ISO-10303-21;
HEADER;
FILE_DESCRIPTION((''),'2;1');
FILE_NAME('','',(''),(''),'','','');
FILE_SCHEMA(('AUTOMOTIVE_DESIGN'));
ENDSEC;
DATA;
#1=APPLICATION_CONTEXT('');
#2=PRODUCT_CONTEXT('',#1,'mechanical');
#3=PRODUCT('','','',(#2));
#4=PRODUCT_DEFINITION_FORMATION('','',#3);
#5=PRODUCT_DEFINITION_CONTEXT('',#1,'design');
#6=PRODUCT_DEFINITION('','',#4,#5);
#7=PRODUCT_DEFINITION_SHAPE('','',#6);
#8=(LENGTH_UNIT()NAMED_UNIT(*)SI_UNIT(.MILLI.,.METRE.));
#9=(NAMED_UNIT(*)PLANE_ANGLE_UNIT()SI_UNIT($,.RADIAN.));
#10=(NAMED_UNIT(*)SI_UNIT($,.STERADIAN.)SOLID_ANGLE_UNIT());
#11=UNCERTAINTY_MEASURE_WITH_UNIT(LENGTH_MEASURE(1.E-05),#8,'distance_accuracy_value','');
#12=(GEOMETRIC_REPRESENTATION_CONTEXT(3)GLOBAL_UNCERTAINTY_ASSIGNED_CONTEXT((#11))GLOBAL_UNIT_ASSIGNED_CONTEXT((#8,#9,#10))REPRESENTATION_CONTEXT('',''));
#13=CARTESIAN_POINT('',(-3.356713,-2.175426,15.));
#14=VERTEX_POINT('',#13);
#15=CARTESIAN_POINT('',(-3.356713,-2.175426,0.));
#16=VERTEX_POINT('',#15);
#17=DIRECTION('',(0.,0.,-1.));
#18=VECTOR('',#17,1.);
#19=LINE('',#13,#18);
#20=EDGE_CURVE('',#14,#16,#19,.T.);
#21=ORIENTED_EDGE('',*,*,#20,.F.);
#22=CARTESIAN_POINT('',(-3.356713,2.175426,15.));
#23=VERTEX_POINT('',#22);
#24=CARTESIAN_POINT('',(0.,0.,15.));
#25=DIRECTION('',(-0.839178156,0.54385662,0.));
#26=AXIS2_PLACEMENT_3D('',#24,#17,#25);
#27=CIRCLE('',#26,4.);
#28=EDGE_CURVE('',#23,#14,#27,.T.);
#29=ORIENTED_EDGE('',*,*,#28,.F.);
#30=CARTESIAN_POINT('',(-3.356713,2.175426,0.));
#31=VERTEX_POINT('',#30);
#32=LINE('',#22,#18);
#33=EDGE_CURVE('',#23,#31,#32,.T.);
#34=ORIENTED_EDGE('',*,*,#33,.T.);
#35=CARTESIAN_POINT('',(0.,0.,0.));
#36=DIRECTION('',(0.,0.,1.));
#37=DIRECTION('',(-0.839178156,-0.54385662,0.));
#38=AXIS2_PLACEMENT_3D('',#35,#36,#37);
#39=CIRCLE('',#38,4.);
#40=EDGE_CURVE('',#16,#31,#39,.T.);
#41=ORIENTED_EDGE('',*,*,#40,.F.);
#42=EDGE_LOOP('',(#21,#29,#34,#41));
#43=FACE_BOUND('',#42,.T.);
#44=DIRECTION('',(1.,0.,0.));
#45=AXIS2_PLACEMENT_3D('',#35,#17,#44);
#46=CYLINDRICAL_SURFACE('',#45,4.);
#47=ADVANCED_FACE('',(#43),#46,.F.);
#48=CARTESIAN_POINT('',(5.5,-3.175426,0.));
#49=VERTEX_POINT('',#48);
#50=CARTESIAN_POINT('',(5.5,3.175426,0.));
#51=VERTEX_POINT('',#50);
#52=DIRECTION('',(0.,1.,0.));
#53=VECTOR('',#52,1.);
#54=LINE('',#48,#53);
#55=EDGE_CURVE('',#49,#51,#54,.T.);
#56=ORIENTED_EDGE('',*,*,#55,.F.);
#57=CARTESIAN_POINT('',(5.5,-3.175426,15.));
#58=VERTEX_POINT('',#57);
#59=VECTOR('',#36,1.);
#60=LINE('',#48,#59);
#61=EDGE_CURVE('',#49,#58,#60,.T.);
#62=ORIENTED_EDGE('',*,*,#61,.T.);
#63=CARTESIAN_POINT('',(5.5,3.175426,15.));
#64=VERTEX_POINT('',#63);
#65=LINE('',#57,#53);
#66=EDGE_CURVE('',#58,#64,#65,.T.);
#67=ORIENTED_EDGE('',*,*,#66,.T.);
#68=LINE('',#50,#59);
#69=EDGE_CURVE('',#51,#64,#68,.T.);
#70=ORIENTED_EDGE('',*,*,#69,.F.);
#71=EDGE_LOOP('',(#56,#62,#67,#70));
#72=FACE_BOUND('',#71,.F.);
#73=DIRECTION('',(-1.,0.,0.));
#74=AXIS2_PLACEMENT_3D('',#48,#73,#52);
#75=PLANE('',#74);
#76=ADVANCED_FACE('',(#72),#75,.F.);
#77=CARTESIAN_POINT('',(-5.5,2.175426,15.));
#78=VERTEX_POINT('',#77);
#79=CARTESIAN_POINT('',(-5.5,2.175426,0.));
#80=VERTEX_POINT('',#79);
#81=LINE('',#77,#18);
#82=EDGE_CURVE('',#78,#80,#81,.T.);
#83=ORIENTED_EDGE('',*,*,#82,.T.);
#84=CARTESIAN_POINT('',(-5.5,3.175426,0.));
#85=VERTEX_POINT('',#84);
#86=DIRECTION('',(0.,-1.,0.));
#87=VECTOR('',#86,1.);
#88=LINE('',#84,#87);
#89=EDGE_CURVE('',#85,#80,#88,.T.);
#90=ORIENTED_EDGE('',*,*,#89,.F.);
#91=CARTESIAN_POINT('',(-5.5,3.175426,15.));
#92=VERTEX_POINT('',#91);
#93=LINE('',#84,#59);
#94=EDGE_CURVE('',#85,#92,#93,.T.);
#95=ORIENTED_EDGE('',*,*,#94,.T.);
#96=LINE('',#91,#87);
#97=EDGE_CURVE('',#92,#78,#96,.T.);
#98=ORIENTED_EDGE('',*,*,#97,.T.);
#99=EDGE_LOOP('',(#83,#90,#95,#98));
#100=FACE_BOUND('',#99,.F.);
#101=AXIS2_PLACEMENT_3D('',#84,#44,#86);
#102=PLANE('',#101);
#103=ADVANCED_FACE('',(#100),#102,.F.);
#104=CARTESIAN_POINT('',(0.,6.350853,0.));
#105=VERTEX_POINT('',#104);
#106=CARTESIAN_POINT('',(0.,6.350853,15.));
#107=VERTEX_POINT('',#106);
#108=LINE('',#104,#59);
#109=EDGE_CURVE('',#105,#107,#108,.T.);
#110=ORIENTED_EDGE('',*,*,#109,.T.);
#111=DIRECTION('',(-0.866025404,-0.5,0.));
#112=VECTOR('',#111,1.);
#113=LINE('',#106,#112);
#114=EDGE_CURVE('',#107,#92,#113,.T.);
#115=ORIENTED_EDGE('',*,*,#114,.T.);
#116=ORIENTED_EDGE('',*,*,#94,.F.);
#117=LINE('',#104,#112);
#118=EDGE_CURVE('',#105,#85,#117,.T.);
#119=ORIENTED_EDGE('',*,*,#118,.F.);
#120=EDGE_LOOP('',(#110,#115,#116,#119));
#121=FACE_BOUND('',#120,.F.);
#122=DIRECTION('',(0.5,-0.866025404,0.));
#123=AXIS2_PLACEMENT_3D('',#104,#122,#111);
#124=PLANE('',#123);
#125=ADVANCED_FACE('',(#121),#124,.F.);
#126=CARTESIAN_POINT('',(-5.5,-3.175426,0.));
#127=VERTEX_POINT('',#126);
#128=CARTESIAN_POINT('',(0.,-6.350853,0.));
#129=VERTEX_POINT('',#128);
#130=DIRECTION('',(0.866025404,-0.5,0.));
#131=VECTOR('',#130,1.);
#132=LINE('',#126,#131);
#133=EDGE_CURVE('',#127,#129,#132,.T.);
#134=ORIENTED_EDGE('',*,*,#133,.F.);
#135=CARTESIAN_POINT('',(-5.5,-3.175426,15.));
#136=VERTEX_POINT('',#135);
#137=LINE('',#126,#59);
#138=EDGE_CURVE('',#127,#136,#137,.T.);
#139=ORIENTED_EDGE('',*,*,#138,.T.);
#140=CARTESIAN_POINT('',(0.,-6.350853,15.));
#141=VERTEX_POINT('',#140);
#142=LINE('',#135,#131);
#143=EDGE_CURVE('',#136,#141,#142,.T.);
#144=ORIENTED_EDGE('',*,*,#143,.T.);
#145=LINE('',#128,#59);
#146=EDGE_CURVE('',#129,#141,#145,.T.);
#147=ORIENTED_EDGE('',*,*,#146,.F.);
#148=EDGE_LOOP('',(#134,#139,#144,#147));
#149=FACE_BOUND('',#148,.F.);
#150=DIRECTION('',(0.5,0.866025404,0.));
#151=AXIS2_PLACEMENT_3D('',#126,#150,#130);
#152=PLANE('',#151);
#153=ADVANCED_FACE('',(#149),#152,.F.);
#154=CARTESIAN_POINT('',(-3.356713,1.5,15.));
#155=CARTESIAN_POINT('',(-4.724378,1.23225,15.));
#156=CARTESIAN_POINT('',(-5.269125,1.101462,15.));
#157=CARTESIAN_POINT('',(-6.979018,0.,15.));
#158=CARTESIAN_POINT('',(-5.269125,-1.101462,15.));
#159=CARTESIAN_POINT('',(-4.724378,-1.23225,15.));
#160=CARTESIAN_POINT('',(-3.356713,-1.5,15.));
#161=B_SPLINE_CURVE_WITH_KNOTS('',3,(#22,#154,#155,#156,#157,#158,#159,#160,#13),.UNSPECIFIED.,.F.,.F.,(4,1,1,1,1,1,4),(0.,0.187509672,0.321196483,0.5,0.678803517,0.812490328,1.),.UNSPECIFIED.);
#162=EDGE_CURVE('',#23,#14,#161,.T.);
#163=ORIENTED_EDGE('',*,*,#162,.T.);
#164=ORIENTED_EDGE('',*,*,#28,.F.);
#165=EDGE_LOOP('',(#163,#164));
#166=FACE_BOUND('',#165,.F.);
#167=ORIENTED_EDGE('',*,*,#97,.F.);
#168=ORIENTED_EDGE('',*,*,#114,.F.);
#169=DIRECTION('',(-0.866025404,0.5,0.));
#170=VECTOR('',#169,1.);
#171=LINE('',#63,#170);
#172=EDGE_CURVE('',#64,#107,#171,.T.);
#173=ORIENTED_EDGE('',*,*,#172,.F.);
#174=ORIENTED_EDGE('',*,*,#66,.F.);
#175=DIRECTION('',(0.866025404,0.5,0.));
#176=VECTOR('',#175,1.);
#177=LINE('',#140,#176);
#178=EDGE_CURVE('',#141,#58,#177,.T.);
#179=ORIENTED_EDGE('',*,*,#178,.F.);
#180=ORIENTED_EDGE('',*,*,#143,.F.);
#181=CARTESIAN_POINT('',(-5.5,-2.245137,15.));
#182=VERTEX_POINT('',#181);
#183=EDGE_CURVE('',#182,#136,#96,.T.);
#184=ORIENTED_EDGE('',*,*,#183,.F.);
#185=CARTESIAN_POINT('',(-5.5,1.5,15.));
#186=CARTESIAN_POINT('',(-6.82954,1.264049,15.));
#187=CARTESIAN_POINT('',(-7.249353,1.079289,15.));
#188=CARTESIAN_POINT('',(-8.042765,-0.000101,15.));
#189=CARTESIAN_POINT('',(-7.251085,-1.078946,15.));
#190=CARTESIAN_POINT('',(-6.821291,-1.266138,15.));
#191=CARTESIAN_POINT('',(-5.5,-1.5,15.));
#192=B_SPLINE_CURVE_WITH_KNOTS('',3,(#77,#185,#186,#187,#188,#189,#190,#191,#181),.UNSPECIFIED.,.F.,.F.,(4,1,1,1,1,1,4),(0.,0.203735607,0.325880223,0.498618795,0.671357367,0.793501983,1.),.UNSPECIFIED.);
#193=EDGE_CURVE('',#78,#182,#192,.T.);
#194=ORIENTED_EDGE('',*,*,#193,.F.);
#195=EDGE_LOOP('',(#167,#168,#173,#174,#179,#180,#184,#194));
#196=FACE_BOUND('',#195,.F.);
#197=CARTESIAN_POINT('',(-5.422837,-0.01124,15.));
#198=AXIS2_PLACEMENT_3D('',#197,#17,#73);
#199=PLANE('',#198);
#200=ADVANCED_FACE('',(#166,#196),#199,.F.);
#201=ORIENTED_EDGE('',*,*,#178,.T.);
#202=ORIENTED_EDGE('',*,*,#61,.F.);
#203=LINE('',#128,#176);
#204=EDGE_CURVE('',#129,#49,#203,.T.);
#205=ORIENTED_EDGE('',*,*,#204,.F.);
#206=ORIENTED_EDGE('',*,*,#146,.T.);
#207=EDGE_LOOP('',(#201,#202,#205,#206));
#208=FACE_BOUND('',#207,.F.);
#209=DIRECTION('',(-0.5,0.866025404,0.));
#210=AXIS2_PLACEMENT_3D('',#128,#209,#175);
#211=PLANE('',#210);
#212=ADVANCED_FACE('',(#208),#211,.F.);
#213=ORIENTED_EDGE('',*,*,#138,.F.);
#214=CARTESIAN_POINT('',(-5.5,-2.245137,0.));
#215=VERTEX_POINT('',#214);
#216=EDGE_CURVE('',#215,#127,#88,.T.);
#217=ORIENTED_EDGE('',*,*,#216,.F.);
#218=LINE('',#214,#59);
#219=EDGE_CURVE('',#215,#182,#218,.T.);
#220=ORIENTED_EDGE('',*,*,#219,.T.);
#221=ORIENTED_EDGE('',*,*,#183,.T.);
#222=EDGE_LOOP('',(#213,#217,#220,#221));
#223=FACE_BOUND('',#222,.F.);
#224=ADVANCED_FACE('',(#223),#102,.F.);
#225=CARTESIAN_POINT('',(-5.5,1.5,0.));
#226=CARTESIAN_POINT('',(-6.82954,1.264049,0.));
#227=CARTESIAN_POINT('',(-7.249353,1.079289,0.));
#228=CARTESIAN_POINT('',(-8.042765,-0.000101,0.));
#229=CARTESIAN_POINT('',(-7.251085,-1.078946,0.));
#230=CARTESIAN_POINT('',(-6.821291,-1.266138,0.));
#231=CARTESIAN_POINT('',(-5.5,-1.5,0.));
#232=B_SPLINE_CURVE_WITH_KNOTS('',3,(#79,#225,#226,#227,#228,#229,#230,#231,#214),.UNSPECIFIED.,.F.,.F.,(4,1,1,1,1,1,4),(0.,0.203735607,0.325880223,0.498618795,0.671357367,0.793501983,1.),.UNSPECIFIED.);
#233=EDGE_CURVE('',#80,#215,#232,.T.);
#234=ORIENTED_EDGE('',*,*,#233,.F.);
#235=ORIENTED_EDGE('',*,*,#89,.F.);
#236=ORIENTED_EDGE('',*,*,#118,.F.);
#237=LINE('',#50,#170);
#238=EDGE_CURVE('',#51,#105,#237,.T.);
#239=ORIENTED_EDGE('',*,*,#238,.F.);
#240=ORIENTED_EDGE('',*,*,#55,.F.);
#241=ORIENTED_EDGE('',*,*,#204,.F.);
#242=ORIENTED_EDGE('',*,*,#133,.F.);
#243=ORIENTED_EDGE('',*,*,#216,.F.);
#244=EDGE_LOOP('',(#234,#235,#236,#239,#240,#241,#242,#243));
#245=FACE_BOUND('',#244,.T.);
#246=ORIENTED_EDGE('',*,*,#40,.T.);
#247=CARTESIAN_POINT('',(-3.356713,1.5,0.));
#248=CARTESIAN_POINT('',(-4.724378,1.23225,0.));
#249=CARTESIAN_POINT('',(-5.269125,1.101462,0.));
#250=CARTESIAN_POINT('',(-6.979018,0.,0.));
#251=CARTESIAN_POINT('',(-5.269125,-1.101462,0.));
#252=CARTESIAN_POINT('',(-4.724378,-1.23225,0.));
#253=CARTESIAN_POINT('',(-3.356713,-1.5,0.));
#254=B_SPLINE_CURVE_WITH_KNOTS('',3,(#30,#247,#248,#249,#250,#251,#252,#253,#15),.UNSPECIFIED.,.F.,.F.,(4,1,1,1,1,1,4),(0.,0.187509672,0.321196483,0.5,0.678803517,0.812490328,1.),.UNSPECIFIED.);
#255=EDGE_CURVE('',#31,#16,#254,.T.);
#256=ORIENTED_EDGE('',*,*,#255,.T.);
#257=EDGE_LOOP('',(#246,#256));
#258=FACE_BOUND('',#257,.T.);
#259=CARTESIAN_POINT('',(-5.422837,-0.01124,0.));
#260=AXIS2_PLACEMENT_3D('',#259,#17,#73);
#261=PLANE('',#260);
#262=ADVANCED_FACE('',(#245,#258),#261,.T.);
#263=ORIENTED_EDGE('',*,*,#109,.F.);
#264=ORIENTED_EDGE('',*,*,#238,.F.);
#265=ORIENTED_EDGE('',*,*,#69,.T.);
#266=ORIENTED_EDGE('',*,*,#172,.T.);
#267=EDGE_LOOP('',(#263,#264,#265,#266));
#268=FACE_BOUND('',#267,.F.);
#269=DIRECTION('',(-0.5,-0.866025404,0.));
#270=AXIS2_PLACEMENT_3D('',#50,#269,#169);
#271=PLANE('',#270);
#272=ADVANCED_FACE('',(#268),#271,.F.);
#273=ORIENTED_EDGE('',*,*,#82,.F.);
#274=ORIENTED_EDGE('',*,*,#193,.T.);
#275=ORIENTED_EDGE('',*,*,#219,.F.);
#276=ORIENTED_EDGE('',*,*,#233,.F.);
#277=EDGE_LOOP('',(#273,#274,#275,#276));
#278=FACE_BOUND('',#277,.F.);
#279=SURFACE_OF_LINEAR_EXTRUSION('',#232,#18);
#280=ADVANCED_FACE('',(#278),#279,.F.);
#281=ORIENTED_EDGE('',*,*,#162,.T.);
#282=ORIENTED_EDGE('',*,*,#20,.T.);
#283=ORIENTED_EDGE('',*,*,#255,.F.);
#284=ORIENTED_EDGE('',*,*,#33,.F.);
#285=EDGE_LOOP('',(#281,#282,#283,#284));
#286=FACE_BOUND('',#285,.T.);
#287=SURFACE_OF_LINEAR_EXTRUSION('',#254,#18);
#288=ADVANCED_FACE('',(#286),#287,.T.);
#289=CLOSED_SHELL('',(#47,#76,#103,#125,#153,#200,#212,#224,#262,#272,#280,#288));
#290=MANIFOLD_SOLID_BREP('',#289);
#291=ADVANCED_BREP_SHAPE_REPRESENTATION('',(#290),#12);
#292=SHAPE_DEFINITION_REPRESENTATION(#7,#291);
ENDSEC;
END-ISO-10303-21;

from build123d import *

# Parameters (mm, degrees)
F0_R       = 4
F1_DEPTH   = 15
F1_FACE1_R = 4
F3_DEPTH   = 15.001
F5_DEPTH   = 15


# Not quite as in the source:
# - a feature of the source that left no trace in its solid (it failed there, or was rolled back) is left out


with BuildPart() as f1:
    # F0 (on Top) → F1 (new body)
    with BuildSketch(Plane.XY):
        Polygon((5.5, -3.1754264805), (5.5, 3.1754264805), (0, 6.3508529611), (-5.5, 3.1754264805), (-5.5, -3.1754264805), (0, -6.3508529611), align=None)
        Circle(F0_R, mode=Mode.SUBTRACT)
    extrude(amount=F1_DEPTH)

    # F2 (on face) + F1_face1 (on face) → F3 (cut, through all)
    with BuildSketch(Plane.XY.offset(15)):
        with BuildLine():
            Line((-3.3567126222, 2.1754264805), (-5.5, 2.1754264805))
            Line((-5.5, 2.1754264805), (-5.5, -2.1754264805))
            Line((-5.5, -2.1754264805), (-3.3567126222, -2.1754264805))
            ThreePointArc((-3.3567126222, -2.1754264805), (-4, 0), (-3.3567126222, 2.1754264805))
        make_face()
    with BuildSketch(Plane(origin=(0, 0, 0), x_dir=(1, 0, 0), z_dir=(0, 0, -1))):
        Polygon((5.5, -3.1754264805), (5.5, 3.1754264805), (0, 6.3508529611), (-5.5, 3.1754264805), (-5.5, -3.1754264805), (0, -6.3508529611), align=None)
        Circle(F1_FACE1_R, mode=Mode.SUBTRACT)
    extrude(amount=-F3_DEPTH, dir=(0, 0, 1), mode=Mode.SUBTRACT)

    # F4 (on Top) → F5 (join, through all)
    with BuildSketch(Plane.XY):
        with BuildLine():
            add(Edge.make_bspline(
                [(-3.3567126222, 2.1754264805), (-3.3567126222, 1.5), (-4.7243783011, 1.2322496152), (-5.2691254391, 1.1014623302), (-6.9790180063, 0), (-5.2691254391, -1.1014623302), (-4.7243783011, -1.2322496152), (-3.3567126222, -1.5), (-3.3567126222, -2.1754264805)],
                knots=[0, 0, 0, 0, 0.1875096718, 0.3211964826, 0.5, 0.6788035174, 0.8124903282, 1, 1, 1, 1], degree=3))
            Line((-3.3567126222, 2.1754264805), (-5.5, 2.1754264805))
            add(Edge.make_bspline(
                [(-5.5, 2.1754264805), (-5.5, 1.5), (-6.8295402039, 1.2640494778), (-7.2493526274, 1.0792890587), (-8.0427649595, -0.000100502), (-7.2510852775, -1.0789459234), (-6.8212907124, -1.2661384452), (-5.5, -1.5), (-5.5, -2.2451365801)],
                knots=[0, 0, 0, 0, 0.2037356069, 0.3258802228, 0.4986187951, 0.6713573674, 0.7935019833, 1, 1, 1, 1], degree=3))
            Line((-5.5, -2.2451365801), (-3.3567126222, -2.1754264805))
        make_face()
    extrude(amount=F5_DEPTH)


solid = f1.part
